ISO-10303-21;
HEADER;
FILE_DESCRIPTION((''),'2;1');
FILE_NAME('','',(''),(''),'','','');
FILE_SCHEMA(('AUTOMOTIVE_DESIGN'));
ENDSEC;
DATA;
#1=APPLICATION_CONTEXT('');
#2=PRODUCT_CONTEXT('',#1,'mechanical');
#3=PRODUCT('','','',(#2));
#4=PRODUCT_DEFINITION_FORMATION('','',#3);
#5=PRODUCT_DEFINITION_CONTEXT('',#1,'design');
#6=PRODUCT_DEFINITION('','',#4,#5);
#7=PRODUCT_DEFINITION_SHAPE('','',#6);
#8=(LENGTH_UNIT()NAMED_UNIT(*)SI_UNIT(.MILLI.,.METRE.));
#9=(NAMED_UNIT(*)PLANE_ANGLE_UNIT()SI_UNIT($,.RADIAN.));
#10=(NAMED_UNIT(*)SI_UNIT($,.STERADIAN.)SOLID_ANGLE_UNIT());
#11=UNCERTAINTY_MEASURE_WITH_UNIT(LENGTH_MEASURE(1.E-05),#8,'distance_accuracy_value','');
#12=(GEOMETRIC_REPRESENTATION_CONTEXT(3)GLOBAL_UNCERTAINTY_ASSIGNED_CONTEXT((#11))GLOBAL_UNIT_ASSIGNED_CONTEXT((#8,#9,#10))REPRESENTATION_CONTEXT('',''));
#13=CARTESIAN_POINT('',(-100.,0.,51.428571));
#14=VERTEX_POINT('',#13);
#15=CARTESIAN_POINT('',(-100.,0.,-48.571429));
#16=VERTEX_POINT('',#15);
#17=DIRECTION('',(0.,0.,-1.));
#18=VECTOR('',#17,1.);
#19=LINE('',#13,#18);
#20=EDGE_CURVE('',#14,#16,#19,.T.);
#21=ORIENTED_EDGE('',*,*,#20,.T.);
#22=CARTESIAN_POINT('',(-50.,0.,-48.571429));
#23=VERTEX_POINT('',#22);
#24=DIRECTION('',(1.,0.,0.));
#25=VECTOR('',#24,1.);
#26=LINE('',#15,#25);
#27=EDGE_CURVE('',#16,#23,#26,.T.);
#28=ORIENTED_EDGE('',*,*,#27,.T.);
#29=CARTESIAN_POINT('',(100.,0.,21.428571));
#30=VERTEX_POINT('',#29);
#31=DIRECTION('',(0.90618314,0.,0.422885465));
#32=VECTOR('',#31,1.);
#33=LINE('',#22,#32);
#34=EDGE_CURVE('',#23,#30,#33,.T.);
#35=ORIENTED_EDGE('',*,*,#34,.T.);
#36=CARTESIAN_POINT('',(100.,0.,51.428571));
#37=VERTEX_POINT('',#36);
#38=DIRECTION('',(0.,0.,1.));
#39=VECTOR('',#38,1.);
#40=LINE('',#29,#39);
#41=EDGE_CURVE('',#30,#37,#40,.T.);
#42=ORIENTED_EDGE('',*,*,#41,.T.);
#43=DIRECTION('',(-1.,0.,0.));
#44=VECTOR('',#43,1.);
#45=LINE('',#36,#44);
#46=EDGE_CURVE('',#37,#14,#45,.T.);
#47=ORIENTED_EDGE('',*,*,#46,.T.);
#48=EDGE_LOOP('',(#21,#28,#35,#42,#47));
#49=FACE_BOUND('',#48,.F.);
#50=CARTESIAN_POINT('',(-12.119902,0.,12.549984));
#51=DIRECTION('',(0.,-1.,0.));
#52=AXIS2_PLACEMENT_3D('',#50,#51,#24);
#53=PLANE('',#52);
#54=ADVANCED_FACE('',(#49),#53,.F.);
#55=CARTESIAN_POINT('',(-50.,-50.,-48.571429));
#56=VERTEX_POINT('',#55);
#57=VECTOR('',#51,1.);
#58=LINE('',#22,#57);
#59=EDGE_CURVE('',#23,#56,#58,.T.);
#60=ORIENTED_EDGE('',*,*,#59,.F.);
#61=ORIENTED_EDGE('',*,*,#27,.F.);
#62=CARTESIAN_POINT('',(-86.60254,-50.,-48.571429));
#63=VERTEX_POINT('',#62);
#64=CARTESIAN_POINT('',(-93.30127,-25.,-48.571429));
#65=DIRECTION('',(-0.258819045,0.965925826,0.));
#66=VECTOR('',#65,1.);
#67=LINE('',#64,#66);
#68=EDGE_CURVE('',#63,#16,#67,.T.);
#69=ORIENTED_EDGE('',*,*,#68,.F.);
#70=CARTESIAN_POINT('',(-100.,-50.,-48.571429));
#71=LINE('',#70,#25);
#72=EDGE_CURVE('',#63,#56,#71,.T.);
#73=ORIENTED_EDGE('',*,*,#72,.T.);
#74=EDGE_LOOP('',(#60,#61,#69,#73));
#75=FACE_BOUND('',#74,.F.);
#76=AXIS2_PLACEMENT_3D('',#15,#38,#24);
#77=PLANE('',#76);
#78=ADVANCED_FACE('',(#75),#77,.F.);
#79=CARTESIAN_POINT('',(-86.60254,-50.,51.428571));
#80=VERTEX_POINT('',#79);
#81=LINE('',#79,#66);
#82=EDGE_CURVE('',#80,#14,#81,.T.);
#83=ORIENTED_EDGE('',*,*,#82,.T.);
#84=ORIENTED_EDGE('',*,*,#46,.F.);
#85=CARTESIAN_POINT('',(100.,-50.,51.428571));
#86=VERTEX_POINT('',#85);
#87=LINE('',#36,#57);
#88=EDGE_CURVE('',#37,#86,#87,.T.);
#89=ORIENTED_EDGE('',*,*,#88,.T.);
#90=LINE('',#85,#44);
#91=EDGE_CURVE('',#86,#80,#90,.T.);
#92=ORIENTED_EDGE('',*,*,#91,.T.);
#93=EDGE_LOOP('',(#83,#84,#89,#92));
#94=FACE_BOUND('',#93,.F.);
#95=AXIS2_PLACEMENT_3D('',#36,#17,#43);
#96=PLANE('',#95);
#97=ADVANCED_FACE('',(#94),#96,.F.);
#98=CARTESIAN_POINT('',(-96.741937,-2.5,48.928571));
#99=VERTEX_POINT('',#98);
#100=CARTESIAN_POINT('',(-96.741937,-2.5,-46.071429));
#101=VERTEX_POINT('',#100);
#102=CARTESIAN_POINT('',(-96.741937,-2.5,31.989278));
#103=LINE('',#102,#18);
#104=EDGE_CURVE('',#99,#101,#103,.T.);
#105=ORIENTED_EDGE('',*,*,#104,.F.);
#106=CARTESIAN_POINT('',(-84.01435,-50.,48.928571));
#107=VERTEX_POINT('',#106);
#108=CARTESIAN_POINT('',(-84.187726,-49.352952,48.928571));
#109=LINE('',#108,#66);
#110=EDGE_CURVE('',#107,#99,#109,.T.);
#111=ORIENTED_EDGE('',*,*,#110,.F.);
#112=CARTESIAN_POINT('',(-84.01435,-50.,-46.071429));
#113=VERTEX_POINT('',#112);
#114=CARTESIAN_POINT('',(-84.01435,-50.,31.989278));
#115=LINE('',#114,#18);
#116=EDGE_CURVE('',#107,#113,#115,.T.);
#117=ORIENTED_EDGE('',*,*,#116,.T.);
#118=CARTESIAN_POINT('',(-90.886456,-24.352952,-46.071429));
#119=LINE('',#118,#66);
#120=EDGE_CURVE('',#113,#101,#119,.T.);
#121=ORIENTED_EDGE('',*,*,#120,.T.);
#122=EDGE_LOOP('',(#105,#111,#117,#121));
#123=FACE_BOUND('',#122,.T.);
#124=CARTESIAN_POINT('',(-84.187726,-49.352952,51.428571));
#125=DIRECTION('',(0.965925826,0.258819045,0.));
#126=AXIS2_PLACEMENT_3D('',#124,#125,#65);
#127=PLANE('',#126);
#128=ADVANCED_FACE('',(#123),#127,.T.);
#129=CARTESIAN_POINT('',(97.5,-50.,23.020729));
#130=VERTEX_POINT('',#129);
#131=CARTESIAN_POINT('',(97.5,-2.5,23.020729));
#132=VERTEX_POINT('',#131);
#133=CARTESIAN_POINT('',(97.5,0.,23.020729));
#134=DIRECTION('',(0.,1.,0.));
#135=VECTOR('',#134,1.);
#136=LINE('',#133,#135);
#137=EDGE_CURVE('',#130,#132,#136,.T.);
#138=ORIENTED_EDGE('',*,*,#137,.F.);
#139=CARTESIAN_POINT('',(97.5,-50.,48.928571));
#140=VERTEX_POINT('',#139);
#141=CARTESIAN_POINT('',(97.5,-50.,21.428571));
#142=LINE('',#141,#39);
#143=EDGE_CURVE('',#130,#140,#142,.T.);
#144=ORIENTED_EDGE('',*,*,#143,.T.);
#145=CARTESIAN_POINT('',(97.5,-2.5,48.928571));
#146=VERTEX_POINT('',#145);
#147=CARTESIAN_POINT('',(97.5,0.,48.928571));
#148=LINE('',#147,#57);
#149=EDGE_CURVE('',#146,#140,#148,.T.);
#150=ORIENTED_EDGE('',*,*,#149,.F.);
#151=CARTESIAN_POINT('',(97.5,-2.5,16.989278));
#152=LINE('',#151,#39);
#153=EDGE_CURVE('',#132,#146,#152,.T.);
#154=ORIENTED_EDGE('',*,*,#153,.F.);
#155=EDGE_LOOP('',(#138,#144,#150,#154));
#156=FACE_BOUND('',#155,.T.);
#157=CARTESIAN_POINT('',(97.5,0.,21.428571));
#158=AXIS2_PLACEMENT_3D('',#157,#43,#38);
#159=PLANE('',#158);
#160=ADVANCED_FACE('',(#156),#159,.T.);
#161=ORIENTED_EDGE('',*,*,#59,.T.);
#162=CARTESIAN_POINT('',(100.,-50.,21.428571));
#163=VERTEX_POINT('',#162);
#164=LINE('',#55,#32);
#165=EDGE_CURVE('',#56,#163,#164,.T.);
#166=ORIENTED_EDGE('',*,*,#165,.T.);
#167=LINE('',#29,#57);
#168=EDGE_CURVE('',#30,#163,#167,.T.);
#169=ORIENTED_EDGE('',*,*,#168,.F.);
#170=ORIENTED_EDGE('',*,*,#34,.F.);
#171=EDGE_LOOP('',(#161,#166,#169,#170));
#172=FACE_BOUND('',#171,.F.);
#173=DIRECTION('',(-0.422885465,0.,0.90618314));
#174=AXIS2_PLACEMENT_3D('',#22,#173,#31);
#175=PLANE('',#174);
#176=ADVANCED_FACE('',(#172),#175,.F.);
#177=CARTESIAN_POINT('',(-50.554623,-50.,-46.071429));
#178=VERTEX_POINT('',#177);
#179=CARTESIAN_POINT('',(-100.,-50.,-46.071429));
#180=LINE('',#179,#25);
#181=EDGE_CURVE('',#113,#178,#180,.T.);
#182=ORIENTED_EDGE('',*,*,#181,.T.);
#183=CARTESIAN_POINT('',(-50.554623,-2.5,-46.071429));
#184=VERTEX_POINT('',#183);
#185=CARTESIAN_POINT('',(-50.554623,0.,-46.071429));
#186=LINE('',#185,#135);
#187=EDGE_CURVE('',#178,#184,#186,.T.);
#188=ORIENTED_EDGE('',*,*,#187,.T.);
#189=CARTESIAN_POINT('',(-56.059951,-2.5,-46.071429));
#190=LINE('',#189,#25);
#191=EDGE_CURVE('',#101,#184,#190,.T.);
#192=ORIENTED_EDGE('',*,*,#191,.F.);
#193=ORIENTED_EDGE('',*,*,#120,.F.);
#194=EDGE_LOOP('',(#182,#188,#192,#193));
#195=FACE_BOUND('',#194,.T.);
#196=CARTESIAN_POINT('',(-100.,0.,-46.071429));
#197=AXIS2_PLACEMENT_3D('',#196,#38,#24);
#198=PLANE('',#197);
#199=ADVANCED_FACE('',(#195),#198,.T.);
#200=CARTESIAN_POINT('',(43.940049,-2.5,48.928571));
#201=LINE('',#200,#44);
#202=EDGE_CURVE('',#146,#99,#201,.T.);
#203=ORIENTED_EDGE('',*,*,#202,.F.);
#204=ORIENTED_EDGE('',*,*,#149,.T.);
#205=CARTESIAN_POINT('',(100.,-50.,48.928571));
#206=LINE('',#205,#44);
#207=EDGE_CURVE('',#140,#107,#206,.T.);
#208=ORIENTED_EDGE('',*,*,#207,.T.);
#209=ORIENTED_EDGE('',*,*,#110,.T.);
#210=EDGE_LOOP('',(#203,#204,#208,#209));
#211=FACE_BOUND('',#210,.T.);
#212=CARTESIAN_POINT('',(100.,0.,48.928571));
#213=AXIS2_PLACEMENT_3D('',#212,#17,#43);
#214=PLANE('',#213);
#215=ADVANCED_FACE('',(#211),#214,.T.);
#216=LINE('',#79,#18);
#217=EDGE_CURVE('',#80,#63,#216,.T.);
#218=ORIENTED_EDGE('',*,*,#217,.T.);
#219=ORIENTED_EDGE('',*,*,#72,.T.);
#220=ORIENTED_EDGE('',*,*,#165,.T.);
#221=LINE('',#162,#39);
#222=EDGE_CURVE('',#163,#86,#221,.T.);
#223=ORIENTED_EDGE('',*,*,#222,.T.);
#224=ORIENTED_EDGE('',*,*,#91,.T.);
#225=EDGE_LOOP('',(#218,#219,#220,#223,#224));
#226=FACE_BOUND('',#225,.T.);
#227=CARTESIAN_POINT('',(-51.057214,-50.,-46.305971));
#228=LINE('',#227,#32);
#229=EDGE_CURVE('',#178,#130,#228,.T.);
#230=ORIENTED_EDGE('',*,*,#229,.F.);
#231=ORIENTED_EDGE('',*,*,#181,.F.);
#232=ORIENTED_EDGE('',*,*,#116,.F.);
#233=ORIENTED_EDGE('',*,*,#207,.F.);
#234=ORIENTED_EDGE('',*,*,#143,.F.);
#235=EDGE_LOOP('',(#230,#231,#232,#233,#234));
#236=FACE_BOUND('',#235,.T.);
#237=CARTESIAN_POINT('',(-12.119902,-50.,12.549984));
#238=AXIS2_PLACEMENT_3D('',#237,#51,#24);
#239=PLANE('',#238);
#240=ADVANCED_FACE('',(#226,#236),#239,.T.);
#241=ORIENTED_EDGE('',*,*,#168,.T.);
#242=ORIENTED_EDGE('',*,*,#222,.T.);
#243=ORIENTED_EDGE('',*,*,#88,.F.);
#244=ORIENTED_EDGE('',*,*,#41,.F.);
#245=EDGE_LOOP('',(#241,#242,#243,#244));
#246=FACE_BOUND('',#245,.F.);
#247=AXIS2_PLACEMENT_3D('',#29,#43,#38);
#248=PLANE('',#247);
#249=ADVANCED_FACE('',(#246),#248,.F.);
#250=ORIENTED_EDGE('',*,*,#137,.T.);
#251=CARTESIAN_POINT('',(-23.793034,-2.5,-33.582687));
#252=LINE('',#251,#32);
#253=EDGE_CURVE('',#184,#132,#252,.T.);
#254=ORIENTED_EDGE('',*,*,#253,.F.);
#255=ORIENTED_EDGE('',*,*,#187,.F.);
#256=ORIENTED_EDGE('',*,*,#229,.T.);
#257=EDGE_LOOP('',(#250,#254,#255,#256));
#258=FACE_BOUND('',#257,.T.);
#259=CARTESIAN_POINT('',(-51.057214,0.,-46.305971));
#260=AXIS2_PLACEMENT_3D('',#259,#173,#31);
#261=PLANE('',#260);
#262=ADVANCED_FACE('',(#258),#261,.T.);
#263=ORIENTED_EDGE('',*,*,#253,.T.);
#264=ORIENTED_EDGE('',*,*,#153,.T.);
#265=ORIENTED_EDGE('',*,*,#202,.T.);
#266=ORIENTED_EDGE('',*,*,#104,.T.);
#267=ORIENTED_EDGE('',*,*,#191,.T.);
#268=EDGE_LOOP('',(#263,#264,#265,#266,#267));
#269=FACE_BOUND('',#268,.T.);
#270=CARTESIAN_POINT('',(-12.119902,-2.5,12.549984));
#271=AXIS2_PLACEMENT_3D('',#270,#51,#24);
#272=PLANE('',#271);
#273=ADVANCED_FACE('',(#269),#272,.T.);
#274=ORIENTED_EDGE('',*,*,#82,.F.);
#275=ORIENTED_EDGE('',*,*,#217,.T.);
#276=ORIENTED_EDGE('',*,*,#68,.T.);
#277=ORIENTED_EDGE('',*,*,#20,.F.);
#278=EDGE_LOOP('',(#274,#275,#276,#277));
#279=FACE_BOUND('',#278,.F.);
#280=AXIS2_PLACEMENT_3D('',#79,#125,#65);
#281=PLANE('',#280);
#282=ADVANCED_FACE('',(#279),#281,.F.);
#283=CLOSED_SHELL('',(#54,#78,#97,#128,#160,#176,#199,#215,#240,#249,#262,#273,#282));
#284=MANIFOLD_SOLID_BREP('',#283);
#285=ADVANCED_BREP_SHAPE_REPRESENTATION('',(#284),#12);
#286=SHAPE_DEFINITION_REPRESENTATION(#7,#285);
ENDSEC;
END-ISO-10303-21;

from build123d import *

# Parameters (mm, degrees)
F1_DEPTH = 50
F3_DEPTH = 100.001
F4_T     = -2.5


with BuildPart() as f1:
    # F0 (on Front) → F1 (new body)
    with BuildSketch(Plane.XZ):
        Polygon((100, 51.4285714286), (-100, 51.4285714286), (-100, -48.5714285714), (-50, -48.5714285714), (100, 21.4285714286), align=None)
    extrude(amount=F1_DEPTH)

    # F2 (on face) → F3 (cut, through all)
    with BuildSketch(Plane.XY.offset(51.4285714286)):
        Polygon((-121.3779896498, -70.3287050128), (-68.4581929454, -117.7156264903), (-86.6025403784, -50), (-100, -50), (-100, 0), (-122.3772391677, 0), align=None)
        Polygon((-100, -50), (-86.6025403784, -50), (-100, 0), align=None)
    extrude(amount=-F3_DEPTH, mode=Mode.SUBTRACT)

    # F4
    f4_openings = [f1.faces().sort_by_distance(p)[0] for p in [
        (-10.253348, -50, 11.868344),
    ]]
    offset(amount=F4_T, openings=f4_openings)


solid = f1.part
